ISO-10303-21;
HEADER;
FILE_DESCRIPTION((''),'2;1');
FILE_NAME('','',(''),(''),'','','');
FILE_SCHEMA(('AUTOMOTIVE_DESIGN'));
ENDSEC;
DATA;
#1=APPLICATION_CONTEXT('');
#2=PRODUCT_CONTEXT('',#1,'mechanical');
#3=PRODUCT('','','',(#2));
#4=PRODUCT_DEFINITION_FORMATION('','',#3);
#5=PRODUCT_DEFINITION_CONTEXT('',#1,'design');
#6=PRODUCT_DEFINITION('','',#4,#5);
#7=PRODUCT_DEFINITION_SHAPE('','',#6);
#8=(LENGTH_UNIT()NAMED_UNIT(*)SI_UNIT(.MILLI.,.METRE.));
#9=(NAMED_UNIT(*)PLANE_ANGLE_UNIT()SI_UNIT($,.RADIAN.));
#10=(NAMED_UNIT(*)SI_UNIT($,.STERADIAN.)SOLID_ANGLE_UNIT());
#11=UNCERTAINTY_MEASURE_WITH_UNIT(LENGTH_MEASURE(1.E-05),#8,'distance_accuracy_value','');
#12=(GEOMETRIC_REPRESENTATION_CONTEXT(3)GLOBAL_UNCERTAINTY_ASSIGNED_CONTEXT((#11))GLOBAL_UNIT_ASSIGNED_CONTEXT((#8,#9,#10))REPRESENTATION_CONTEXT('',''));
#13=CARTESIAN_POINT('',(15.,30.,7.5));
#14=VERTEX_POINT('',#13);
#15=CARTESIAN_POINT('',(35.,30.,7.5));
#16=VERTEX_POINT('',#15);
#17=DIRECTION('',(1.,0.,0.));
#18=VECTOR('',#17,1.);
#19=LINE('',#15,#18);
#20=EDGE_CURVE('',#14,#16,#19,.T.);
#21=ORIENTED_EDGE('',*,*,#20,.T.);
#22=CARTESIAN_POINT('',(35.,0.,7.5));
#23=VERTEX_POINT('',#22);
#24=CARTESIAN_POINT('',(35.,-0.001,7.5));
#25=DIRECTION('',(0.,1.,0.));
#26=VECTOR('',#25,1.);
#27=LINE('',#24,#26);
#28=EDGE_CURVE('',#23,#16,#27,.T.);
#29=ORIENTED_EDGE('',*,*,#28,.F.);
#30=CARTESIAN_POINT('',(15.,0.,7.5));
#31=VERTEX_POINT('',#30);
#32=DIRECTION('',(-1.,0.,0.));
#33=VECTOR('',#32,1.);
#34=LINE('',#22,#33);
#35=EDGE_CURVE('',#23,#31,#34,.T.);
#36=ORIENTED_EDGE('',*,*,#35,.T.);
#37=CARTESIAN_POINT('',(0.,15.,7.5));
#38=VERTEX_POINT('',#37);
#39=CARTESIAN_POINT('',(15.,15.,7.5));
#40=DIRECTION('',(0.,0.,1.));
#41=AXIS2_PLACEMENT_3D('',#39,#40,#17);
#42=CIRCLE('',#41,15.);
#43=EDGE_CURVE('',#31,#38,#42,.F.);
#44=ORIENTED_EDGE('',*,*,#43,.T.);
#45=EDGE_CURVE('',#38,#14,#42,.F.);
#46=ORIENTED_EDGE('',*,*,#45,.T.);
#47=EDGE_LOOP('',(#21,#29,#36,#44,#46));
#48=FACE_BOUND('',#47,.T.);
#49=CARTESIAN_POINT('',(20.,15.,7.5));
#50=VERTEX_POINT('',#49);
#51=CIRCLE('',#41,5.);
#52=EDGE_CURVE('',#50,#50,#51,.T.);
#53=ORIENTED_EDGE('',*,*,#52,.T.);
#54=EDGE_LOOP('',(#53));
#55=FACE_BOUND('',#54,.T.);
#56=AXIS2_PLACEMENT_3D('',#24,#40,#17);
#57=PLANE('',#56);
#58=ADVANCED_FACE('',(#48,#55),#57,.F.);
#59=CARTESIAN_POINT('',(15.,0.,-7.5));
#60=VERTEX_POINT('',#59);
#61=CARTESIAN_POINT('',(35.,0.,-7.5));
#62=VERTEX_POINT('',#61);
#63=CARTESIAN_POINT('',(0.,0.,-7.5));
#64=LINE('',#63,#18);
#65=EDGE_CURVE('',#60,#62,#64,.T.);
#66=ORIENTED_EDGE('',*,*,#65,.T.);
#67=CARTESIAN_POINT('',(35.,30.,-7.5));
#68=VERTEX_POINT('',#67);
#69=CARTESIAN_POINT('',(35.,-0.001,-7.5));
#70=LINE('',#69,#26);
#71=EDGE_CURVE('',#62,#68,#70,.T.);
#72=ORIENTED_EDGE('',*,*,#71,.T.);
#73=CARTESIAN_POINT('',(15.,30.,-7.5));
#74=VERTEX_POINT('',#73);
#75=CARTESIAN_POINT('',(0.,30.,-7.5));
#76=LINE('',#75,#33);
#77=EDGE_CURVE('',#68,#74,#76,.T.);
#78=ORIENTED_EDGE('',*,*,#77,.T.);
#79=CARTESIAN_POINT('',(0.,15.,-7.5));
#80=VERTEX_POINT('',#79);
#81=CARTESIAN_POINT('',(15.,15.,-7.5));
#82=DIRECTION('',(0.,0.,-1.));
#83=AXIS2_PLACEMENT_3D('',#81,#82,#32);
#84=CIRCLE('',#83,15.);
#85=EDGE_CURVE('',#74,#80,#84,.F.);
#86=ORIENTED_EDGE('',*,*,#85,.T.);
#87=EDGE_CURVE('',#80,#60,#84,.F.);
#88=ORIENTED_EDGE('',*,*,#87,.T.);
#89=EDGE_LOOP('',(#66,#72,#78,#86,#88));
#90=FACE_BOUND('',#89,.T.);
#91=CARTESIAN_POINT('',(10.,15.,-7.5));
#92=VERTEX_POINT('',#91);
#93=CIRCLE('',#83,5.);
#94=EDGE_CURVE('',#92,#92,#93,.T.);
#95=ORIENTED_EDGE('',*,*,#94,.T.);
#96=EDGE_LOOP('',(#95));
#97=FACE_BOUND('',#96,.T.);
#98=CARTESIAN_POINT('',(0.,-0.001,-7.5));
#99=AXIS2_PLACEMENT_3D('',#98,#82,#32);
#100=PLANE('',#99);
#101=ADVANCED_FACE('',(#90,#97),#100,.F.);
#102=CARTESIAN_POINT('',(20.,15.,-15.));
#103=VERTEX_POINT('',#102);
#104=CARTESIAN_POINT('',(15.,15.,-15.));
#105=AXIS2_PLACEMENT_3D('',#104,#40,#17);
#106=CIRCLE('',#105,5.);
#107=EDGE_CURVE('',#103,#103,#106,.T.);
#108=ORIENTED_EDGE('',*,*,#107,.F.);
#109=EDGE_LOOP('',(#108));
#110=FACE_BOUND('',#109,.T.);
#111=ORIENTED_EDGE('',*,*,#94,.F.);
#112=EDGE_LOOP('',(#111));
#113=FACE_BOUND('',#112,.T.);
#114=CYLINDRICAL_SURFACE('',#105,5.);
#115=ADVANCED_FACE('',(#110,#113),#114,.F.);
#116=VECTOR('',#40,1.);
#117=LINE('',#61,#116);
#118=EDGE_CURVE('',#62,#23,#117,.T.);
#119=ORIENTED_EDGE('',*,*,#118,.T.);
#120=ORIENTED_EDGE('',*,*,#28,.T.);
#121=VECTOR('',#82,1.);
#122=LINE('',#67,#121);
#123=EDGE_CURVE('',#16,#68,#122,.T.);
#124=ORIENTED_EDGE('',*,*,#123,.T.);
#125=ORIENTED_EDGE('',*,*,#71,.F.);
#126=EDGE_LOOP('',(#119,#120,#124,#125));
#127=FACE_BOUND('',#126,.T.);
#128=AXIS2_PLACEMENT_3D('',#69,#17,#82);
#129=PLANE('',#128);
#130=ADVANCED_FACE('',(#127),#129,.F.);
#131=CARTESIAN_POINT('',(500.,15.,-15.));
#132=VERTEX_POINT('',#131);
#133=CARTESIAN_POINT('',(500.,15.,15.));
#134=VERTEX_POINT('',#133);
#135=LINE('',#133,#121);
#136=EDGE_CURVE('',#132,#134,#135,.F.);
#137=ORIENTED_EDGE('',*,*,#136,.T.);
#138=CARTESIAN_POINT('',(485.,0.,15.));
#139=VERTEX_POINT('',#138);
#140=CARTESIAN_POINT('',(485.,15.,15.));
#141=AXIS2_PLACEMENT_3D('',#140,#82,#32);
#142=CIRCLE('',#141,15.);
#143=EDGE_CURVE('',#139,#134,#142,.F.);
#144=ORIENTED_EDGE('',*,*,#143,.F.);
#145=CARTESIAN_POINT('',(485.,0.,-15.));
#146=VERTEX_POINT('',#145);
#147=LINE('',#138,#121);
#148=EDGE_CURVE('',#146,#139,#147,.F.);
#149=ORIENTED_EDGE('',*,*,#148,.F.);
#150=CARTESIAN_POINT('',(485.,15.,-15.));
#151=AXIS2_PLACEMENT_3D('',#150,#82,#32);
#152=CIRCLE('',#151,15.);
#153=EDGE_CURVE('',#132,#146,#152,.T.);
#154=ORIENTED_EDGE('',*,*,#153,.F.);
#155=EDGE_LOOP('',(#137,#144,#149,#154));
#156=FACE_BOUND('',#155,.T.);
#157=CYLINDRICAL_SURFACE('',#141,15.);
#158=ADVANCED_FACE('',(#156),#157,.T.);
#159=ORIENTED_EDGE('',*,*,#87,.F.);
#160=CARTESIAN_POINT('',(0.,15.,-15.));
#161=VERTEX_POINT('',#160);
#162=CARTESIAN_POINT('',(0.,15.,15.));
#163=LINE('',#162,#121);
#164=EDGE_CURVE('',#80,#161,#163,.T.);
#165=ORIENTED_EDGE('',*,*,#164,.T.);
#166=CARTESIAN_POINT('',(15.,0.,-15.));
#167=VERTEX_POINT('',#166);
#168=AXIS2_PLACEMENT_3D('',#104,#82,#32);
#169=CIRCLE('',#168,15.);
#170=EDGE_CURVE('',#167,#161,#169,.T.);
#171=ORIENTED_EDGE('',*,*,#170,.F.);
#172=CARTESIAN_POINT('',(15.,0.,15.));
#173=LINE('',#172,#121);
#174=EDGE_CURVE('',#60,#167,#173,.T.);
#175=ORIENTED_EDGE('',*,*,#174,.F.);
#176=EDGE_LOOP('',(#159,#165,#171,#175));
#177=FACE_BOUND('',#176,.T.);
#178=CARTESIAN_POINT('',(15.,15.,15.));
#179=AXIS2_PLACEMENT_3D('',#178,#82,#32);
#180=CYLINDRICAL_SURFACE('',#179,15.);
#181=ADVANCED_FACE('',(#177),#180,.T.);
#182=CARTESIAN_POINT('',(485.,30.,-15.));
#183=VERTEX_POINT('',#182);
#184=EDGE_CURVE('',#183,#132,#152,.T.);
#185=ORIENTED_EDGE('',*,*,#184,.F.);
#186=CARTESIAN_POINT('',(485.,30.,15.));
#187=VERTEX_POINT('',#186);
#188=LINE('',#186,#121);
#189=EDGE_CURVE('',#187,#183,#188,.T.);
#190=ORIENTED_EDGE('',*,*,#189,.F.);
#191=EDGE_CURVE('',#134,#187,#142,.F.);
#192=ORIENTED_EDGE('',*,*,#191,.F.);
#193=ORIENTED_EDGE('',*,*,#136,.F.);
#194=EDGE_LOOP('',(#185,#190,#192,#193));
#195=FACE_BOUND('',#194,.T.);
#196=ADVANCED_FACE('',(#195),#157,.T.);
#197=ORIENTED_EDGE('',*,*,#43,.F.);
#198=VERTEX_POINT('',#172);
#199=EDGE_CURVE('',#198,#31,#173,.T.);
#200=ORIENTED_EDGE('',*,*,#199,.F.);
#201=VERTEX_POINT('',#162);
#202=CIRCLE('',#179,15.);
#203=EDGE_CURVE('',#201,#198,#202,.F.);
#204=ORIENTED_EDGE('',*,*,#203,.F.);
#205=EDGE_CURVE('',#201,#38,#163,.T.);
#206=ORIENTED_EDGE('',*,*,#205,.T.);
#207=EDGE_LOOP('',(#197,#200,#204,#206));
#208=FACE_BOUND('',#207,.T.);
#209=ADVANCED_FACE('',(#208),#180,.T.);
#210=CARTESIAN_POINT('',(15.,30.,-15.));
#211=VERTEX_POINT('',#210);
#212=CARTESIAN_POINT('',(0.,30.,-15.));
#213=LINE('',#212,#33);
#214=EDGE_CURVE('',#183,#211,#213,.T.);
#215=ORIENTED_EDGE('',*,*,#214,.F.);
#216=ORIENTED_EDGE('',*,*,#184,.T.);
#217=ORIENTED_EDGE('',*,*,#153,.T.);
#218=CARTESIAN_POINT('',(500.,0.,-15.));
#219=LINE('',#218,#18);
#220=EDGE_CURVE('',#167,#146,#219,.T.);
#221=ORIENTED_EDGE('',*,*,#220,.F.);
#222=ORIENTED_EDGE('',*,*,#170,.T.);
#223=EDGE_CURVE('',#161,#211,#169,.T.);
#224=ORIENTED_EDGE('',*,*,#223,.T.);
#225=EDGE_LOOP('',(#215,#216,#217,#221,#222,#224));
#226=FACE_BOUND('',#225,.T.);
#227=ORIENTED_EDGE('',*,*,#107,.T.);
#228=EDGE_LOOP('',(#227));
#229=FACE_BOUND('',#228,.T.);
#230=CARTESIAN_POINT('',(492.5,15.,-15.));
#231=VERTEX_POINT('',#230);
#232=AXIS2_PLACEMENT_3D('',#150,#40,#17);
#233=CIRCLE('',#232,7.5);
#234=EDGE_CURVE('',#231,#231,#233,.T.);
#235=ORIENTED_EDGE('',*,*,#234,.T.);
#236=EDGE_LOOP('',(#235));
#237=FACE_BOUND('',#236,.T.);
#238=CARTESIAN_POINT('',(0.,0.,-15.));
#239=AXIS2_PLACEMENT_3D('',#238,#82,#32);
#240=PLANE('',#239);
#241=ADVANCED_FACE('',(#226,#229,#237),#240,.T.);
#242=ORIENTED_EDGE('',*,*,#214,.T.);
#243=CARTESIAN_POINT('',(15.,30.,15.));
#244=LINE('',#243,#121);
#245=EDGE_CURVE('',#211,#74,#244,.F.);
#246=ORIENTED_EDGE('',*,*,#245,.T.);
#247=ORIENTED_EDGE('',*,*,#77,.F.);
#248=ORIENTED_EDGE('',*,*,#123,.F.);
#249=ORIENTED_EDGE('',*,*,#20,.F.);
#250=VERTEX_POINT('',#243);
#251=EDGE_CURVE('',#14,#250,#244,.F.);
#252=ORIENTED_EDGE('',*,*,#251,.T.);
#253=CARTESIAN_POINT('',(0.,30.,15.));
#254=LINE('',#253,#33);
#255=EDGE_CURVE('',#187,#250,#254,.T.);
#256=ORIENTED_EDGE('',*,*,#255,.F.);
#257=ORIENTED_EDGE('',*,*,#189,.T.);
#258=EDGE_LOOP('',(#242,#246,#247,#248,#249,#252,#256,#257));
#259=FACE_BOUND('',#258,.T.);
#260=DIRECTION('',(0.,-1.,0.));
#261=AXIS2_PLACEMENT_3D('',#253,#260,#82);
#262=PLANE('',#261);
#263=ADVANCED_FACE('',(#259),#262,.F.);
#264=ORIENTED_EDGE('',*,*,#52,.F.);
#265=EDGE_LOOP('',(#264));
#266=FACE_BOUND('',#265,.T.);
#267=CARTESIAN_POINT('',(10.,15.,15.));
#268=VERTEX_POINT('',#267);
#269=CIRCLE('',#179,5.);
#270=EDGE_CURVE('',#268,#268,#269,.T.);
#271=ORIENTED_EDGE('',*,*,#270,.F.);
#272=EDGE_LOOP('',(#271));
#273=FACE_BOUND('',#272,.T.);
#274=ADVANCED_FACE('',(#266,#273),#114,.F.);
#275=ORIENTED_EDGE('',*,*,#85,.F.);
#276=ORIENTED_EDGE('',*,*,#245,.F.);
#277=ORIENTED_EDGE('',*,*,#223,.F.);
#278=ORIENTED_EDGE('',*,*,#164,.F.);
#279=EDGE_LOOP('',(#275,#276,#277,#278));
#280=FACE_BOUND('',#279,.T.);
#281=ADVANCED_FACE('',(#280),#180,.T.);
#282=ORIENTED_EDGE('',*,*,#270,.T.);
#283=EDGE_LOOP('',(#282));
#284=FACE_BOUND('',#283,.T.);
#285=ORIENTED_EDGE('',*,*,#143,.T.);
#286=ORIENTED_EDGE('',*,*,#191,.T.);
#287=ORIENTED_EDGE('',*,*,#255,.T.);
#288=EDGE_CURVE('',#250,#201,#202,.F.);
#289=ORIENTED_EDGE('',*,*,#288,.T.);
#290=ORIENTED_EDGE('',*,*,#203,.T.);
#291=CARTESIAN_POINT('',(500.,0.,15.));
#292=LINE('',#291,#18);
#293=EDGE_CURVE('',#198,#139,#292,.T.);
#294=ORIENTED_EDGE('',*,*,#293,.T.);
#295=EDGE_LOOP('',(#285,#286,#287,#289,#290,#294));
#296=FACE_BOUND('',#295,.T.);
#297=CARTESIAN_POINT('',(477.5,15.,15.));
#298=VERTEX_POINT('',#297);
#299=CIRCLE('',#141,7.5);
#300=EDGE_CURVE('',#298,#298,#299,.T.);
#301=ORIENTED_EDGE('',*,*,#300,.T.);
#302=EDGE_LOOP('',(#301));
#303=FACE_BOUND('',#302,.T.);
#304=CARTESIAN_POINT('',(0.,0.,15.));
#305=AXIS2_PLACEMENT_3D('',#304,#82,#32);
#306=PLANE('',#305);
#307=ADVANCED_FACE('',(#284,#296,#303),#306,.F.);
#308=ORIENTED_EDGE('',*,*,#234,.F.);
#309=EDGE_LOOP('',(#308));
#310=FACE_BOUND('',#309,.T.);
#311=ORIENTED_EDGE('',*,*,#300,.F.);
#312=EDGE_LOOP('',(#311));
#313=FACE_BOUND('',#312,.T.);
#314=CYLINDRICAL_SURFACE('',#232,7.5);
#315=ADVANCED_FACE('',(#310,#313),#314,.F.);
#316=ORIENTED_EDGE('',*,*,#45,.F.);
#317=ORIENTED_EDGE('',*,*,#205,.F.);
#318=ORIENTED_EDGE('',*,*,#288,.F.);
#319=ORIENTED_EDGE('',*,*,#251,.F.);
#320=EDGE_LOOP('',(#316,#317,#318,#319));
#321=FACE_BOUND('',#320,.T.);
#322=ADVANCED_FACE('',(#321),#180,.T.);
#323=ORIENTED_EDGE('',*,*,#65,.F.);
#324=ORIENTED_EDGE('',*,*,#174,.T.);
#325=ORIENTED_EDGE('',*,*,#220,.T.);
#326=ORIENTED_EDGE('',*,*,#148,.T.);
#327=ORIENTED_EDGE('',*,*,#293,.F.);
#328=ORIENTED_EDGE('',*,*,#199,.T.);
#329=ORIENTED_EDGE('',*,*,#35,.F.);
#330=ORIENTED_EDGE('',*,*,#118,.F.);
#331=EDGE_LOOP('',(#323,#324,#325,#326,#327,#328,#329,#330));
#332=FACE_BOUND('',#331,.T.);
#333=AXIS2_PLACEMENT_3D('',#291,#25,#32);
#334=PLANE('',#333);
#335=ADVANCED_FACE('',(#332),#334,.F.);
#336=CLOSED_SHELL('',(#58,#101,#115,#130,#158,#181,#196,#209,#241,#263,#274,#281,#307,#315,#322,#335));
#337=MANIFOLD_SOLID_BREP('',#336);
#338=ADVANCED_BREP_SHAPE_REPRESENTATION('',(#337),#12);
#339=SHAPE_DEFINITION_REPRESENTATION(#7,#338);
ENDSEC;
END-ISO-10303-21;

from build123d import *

# Parameters (mm, degrees)
SKETCH1_W               = 500
SKETCH1_H               = 30
BOSS_EXTRUDE1_DEPTH     = 15
CUT_EXTRUDE1_REACH      = 503.124
SKETCH2_W               = 35
SKETCH2_H               = 15
CUT_EXTRUDE2_DEPTH      = 502.796771612
CUT_EXTRUDE2_DEPTH_BACK = 502.796771612
SKETCH3_R               = 5
SKETCH3_R_2             = 7.5
FILLET3_R               = 15


with BuildPart() as part:
    # Sketch1 → Boss-Extrude1 (new, symmetric)
    with BuildSketch(Plane.XY):
        with Locations((250, 15)):
            Rectangle(SKETCH1_W, SKETCH1_H)
    extrude(amount=BOSS_EXTRUDE1_DEPTH, both=True)

    # Sketch2 → Cut-Extrude1 (cut, up to next)
    with BuildSketch(Plane(origin=(0, 30, 0), x_dir=(1, 0, 0), z_dir=(0, 1, 0)), mode=Mode.PRIVATE) as cut_extrude1_sk1:
        with Locations((17.5, 0)):
            Rectangle(SKETCH2_W, SKETCH2_H)
    cut_extrude1_tool1 = extrude(cut_extrude1_sk1.sketch, amount=-CUT_EXTRUDE1_REACH, mode=Mode.PRIVATE) & part.part
    add(cut_extrude1_tool1.solids().sort_by_distance((17.5, 30, 0))[0], mode=Mode.SUBTRACT)

    # Sketch3 → Cut-Extrude2 (cut, two sides: drawn at the far end of the back side and taken through both)
    with BuildSketch(Plane.XY.offset(15).offset(-CUT_EXTRUDE2_DEPTH_BACK)):
        with Locations((15, 15)):
            Circle(SKETCH3_R)
        with Locations((485, 15)):
            Circle(SKETCH3_R_2)
    extrude(amount=CUT_EXTRUDE2_DEPTH + CUT_EXTRUDE2_DEPTH_BACK, mode=Mode.SUBTRACT)

    # Fillet3
    fillet3_edges = [part.edges().sort_by_distance(p)[0] for p in [
        (500, 0, 0),
        (500, 30, 0),
        (0, 0, 11.25),
        (0, 0, -11.25),
        (0, 30, -11.25),
        (0, 30, 11.25),
    ]]
    fillet(fillet3_edges, radius=FILLET3_R - 0.0001)  # a hair under: the kernel refuses the full size


solid = part.part
